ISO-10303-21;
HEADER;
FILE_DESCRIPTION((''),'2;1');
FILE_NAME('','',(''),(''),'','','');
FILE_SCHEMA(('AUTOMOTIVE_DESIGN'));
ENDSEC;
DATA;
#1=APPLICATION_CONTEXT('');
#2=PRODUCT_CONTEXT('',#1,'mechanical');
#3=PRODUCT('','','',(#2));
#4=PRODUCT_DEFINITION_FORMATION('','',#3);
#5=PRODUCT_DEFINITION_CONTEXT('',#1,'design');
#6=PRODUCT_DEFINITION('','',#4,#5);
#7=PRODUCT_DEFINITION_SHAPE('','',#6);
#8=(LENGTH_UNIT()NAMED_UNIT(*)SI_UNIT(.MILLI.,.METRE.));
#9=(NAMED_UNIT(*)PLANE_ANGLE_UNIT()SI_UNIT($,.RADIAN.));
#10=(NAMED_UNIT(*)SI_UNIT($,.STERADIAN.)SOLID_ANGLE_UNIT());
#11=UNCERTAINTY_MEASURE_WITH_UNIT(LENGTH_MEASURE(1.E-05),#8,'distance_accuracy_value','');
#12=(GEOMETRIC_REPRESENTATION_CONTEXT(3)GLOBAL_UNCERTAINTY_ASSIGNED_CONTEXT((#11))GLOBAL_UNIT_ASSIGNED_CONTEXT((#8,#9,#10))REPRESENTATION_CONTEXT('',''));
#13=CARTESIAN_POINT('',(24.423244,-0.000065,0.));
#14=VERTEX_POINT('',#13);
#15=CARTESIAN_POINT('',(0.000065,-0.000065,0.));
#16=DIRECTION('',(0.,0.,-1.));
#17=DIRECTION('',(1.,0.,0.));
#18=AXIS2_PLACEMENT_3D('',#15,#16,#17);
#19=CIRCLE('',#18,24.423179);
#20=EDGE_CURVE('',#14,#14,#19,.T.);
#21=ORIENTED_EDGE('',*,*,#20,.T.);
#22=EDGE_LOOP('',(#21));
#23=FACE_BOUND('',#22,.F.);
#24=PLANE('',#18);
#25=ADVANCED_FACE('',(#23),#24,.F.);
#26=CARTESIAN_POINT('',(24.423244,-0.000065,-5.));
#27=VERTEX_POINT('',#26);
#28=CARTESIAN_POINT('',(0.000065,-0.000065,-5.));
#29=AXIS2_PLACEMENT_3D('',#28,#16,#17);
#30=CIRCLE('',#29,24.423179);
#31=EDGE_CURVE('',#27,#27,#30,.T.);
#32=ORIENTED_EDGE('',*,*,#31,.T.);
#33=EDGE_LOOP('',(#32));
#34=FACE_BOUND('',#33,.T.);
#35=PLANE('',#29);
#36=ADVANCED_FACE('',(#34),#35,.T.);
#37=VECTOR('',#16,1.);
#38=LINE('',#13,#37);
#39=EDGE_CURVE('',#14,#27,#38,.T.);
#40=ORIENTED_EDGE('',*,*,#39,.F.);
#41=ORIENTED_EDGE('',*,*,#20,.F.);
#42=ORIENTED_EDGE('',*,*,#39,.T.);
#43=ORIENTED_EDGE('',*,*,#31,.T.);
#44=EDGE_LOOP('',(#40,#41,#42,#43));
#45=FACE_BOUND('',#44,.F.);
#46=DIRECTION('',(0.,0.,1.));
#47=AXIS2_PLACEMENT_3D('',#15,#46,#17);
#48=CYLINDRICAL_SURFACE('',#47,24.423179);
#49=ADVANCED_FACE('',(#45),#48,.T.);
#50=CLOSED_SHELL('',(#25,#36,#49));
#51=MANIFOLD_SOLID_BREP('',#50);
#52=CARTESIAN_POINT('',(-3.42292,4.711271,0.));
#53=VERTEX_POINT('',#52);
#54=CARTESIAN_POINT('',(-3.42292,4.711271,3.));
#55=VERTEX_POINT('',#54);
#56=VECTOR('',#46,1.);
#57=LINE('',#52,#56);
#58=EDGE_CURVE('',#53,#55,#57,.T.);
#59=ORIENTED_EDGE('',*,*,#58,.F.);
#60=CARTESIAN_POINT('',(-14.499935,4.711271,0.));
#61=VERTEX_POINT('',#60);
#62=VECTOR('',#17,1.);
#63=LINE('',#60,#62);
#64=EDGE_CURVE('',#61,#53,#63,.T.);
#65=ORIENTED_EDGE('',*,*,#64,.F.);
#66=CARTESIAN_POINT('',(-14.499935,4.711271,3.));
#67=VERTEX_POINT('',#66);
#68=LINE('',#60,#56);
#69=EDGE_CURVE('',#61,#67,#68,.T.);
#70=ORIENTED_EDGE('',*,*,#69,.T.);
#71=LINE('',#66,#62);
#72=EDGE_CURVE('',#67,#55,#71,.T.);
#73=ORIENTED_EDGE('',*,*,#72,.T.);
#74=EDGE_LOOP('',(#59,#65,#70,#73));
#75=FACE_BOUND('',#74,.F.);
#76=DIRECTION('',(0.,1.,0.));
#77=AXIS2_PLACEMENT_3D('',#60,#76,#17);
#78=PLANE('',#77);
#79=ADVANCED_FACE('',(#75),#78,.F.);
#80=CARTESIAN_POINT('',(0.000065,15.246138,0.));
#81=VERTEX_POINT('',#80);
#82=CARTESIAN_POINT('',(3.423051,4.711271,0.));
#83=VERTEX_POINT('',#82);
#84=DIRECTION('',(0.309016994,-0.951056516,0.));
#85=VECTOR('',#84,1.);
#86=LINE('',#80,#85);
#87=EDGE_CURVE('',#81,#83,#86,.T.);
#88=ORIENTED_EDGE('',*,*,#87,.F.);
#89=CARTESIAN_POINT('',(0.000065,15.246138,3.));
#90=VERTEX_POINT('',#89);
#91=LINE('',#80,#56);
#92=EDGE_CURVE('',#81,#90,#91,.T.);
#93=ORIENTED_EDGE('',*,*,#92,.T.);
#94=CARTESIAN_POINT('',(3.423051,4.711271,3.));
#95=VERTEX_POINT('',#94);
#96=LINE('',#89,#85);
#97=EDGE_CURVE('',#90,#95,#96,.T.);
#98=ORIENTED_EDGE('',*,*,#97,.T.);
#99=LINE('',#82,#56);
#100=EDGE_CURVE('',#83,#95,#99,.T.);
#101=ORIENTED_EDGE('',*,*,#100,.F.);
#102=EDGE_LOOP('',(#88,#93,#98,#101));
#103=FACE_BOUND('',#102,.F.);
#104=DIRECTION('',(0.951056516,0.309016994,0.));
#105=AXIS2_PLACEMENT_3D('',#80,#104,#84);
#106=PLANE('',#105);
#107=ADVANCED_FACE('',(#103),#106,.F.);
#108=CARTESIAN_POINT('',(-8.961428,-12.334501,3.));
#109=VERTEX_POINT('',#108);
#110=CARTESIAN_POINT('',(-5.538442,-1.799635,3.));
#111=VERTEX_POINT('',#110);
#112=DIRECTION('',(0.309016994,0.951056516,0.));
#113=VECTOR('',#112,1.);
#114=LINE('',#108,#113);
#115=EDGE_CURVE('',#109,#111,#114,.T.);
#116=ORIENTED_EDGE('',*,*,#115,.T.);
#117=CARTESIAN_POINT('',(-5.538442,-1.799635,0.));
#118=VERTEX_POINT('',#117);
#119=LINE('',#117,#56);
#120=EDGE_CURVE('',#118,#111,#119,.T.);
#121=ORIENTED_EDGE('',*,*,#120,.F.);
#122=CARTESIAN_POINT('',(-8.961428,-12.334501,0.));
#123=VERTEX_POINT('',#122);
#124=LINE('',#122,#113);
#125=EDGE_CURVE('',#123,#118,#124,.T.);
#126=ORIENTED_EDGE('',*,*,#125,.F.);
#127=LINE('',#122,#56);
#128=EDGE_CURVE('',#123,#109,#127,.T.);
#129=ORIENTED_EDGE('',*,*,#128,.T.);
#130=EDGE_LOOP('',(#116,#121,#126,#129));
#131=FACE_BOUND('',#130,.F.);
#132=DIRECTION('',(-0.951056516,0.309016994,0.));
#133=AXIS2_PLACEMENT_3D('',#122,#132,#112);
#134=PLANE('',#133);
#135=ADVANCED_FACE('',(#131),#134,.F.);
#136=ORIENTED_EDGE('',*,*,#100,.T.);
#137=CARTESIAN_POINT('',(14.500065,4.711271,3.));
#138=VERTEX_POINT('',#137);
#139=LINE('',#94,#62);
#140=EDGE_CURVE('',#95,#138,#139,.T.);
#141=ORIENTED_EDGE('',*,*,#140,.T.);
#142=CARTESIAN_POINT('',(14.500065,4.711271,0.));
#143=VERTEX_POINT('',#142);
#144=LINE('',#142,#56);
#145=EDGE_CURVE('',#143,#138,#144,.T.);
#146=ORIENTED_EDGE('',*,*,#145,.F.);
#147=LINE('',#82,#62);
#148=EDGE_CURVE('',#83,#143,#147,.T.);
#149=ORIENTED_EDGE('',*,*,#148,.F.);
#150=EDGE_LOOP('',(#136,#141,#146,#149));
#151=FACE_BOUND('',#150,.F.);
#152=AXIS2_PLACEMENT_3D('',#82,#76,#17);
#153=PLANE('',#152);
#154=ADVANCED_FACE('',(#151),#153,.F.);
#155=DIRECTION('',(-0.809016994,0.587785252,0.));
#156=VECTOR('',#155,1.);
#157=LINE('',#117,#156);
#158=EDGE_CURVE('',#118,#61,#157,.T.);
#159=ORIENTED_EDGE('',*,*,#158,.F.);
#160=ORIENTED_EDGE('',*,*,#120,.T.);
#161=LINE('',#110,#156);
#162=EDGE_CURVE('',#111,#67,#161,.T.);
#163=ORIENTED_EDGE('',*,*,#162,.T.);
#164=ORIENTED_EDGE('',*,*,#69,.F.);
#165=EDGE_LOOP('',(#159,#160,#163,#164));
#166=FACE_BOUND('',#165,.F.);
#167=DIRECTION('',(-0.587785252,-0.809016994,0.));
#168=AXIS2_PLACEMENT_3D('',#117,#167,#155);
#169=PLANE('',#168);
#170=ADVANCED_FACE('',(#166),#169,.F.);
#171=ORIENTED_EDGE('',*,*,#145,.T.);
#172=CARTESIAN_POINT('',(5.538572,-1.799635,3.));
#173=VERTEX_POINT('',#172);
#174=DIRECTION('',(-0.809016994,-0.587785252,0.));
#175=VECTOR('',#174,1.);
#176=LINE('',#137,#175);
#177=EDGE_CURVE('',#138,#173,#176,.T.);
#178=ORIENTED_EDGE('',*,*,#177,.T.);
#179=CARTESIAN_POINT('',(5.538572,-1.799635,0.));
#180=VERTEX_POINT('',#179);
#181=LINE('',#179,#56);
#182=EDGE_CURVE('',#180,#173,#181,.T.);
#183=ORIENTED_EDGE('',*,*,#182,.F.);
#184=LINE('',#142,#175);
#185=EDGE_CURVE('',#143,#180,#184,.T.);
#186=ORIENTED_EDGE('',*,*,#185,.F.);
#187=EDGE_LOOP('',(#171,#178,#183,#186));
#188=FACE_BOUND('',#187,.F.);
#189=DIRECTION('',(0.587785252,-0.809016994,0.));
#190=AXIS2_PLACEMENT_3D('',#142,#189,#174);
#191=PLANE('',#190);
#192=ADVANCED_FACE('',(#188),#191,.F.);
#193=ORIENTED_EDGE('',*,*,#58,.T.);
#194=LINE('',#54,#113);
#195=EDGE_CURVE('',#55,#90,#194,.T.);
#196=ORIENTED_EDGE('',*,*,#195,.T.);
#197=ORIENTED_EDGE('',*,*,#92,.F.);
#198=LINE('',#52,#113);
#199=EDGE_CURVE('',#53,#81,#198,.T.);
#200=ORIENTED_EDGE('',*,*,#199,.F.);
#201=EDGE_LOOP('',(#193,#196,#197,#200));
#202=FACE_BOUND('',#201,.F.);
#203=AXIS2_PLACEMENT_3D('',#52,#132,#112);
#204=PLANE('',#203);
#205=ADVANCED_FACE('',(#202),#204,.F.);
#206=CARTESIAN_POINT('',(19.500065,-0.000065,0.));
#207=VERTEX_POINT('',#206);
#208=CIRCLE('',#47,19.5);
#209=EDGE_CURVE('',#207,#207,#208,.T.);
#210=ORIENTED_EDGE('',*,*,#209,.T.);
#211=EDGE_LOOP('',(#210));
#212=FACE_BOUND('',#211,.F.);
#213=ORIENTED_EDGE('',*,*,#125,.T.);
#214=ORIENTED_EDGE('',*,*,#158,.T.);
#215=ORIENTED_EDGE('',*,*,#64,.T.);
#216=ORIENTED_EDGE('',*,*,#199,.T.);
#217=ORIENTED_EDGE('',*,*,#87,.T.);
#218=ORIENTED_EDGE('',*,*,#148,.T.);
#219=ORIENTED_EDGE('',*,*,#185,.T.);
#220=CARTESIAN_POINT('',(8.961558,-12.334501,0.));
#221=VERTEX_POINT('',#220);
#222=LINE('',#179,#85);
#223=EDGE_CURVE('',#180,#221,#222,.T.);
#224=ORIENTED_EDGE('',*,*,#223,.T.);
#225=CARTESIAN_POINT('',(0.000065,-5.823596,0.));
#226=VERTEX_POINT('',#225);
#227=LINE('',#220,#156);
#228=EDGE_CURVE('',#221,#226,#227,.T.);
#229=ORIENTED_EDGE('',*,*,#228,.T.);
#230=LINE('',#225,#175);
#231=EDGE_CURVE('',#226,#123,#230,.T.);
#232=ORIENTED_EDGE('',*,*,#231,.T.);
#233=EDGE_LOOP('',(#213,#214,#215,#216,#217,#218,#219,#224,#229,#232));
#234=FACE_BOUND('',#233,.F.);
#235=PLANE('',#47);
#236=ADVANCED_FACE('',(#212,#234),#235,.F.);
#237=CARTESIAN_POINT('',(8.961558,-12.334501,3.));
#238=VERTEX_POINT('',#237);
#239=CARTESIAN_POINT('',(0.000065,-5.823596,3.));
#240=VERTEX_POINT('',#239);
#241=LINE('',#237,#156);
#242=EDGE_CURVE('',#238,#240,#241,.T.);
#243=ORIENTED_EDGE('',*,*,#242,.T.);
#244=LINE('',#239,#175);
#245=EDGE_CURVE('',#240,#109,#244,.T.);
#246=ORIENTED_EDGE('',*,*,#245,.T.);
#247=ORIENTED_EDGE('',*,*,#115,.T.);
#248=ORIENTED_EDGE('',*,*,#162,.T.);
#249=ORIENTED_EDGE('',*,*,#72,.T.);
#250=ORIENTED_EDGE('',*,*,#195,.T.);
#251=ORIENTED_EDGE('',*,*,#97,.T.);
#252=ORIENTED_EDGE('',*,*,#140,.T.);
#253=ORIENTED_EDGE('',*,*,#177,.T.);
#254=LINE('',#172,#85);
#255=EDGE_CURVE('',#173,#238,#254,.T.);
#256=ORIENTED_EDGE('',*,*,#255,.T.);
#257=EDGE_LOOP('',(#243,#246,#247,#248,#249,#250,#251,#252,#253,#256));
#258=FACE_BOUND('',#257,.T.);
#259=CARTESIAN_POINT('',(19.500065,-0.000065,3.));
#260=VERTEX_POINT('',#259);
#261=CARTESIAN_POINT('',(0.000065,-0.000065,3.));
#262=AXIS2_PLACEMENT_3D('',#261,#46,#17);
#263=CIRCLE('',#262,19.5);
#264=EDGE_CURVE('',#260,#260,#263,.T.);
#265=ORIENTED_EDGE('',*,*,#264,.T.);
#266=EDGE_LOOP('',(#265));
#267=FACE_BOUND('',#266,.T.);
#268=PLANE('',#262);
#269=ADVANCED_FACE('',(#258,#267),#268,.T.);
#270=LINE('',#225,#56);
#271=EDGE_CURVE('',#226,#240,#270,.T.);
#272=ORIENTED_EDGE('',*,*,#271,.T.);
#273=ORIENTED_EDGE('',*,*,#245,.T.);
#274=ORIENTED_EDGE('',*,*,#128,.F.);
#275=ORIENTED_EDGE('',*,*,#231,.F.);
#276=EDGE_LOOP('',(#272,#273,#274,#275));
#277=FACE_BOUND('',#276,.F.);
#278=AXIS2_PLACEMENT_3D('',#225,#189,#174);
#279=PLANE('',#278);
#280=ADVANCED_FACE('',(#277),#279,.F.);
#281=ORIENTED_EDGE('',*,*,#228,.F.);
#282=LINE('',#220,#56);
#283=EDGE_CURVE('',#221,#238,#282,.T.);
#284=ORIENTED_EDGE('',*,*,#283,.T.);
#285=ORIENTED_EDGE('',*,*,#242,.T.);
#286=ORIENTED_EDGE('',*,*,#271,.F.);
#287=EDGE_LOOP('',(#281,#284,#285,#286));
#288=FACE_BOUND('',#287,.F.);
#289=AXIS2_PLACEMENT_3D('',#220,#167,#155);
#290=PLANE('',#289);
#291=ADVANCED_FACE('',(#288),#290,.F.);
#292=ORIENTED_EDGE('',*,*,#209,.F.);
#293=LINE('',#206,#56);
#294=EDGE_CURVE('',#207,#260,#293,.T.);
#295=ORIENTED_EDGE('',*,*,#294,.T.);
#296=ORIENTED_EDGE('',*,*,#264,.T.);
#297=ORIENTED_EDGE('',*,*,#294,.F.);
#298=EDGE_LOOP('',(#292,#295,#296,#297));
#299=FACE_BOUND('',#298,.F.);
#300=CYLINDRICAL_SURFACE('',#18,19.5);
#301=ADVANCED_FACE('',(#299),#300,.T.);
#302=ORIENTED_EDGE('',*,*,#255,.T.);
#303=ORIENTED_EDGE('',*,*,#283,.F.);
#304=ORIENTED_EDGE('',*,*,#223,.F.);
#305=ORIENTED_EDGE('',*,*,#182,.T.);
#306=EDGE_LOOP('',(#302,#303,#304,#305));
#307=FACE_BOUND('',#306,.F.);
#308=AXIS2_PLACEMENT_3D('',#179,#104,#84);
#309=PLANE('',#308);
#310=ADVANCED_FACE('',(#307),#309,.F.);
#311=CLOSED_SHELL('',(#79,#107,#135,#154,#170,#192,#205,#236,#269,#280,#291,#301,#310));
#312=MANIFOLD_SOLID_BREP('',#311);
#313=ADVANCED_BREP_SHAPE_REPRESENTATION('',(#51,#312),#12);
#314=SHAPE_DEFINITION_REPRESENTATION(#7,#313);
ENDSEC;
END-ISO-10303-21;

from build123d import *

# Parameters (mm, degrees)
F0_R     = 19.5
F1_DEPTH = 3
F2_R     = 24.4231791104
F3_DEPTH = 5


# Not quite as in the source:
# - a feature of the source that left no trace in its solid (it failed there, or was rolled back) is left out


with BuildPart() as f1:
    # F0 (on Top) → F1 (new body)
    with BuildSketch(Plane.XY):
        with Locations((6.52368e-05, -6.45803e-05)):
            Circle(F0_R)
        Polygon((6.52368e-05, -5.823595641), (-8.9614276, -12.3345013014), (-5.5384419263, -1.7996346453), (-14.4999347632, 4.7112710151), (-3.4229204369, 4.7112710151), (6.52368e-05, 15.2461376711), (3.4230509106, 4.7112710151), (14.5000652368, 4.7112710151), (5.5385724, -1.7996346453), (8.9615580737, -12.3345013014), align=None, mode=Mode.SUBTRACT)
    extrude(amount=F1_DEPTH)


with BuildPart() as f3:
    # F2 (on face) → F3 (new body)
    with BuildSketch(Plane(origin=(0, 0, 0), x_dir=(1, 0, 0), z_dir=(0, 0, -1))):
        with Locations((6.52368e-05, 6.45803e-05)):
            Circle(F2_R)
    extrude(amount=F3_DEPTH)


solid = Compound([f1.part, f3.part])
